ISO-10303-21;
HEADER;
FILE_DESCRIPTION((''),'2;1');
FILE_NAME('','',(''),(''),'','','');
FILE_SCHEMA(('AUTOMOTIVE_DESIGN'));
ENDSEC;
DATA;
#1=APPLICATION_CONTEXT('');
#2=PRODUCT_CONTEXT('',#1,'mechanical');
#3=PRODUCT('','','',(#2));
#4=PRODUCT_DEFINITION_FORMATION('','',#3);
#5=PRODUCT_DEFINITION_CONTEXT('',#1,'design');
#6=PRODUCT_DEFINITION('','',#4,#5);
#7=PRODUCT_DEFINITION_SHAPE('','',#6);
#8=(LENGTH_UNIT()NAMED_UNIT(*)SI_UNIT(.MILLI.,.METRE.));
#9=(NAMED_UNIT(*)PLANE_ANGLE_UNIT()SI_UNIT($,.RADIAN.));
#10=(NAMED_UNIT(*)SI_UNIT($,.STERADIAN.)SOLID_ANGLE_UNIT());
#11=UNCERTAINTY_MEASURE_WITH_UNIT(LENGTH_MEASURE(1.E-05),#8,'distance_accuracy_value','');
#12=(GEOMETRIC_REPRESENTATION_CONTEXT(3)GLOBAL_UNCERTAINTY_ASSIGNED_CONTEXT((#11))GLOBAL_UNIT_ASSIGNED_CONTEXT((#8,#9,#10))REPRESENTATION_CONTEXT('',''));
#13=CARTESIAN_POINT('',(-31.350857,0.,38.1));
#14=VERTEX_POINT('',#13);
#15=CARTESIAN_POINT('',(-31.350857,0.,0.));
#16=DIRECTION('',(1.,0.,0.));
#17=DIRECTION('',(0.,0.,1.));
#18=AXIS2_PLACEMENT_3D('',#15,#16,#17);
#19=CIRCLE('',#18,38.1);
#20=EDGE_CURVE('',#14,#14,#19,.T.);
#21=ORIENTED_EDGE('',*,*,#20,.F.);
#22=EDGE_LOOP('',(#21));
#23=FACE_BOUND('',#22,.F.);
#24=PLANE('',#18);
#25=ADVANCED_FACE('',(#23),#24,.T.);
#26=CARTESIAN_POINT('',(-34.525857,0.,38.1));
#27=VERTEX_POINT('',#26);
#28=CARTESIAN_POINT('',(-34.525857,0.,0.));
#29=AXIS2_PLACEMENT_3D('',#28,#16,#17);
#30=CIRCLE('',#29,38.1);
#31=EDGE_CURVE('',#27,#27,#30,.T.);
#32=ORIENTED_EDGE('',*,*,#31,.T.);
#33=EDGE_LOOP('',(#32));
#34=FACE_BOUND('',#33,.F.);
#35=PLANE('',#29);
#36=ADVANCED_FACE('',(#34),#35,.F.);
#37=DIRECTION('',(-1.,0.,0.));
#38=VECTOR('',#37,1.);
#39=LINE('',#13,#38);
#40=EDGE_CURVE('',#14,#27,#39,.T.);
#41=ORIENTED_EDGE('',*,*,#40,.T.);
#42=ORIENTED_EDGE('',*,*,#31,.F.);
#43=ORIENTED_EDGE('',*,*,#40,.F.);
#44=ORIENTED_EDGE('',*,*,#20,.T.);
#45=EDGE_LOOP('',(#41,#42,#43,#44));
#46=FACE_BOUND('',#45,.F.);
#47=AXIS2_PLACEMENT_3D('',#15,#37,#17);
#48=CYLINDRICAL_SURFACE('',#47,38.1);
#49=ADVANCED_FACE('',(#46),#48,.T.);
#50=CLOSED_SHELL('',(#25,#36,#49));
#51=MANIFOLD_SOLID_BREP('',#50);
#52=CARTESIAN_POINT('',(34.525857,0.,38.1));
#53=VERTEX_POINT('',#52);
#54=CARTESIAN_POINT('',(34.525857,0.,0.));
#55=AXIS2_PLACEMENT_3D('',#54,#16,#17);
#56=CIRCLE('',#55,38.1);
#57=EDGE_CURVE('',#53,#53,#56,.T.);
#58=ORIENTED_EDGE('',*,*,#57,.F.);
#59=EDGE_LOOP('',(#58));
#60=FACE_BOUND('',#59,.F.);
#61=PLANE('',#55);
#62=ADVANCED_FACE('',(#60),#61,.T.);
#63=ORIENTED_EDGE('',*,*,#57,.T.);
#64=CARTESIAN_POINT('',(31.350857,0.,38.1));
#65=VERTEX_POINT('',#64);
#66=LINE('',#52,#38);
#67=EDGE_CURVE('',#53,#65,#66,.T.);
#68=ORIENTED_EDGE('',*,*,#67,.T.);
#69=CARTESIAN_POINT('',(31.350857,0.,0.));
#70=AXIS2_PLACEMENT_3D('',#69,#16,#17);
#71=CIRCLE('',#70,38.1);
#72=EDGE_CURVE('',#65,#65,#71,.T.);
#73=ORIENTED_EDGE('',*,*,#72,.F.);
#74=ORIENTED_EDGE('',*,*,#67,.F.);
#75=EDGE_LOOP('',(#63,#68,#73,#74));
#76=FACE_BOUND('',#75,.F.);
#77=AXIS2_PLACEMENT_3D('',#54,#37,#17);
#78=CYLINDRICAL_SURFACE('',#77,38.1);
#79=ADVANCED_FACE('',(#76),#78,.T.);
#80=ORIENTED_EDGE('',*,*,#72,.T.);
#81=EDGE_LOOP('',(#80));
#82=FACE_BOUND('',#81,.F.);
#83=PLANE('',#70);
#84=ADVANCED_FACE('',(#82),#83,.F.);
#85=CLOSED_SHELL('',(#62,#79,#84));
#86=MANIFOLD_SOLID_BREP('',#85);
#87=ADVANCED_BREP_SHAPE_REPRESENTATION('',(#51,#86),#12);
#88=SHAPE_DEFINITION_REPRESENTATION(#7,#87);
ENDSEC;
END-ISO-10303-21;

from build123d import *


# Not quite as in the source:
# - a feature of the source that left no trace in its solid (it failed there, or was rolled back) is left out
# - the program builds the solid bodies; features that only make, move or delete a surface that nothing else refers to are left out


with BuildPart() as f2:
    # F0 (on Front) → F2 (revolve)
    with BuildSketch(Plane.XZ):
        Polygon((-34.5258565417, 0), (-31.3508565417, 0), (-31.3508565417, 25.4), (-31.3508565417, 38.1), (-34.5258565417, 38.1), align=None)
    revolve(axis=Axis((0.2852417529, 0, 0), (1, 0, 0)))


with BuildPart() as f2b:
    # F0 (on Front) → F2, piece 2 (revolve)
    with BuildSketch(Plane.XZ):
        Polygon((31.3508565417, 25.4), (31.3508565417, 0), (34.5258565417, 0), (34.5258565417, 38.1), (31.3508565417, 38.1), align=None)
    revolve(axis=Axis((0.2852417529, 0, 0), (1, 0, 0)))


solid = Compound([f2.part, f2b.part])
